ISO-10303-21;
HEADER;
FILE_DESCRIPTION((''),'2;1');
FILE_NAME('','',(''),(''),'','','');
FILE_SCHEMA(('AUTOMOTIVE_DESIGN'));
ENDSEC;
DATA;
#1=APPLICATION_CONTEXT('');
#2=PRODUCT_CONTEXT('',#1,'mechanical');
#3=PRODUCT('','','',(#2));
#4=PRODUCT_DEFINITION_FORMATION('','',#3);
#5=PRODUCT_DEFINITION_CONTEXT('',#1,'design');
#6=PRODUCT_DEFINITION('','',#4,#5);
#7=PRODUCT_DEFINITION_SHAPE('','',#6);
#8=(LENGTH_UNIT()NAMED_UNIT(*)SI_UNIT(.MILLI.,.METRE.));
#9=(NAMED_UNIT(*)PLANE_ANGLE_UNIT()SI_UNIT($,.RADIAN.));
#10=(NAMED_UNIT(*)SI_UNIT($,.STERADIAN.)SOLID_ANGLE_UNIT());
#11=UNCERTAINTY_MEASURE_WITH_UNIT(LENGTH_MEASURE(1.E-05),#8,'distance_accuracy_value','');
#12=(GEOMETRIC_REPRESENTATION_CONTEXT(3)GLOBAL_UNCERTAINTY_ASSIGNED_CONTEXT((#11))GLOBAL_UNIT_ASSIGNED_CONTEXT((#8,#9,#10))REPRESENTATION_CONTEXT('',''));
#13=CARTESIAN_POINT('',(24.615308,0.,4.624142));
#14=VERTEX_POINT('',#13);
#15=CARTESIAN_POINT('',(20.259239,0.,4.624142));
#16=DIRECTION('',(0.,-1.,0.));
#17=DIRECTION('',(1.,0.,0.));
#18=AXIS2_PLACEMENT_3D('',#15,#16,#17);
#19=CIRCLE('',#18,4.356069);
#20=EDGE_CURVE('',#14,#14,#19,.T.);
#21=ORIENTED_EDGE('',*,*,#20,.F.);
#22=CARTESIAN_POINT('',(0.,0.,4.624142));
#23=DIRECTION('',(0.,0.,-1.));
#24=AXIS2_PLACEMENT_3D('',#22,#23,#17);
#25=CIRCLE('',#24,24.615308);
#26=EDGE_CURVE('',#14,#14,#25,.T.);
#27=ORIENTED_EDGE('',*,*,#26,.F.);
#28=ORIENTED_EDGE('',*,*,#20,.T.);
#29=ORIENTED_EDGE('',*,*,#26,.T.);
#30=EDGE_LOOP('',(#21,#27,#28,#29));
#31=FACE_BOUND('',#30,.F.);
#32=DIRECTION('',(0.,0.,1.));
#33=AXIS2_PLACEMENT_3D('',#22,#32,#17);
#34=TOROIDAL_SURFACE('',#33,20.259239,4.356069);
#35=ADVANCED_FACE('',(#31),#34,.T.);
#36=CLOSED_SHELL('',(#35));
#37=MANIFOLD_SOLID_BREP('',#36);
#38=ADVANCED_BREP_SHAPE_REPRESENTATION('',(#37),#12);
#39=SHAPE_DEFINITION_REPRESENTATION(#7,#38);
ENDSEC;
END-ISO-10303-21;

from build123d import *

# Parameters (mm, degrees)
F1_R = 4.3560693356


# Not quite as in the source:
# - the program builds the solid bodies; features that only make, move or delete a surface that nothing else refers to are left out


with BuildPart() as f3:
    # F1 (on Front) → F3 (revolve)
    with BuildSketch(Plane.XZ):
        with Locations((20.2592387795, 4.6241418459)):
            Circle(F1_R)
    revolve(axis=Axis((0, 0, 0.2561435103), (0, 0, -1)))


solid = f3.part
